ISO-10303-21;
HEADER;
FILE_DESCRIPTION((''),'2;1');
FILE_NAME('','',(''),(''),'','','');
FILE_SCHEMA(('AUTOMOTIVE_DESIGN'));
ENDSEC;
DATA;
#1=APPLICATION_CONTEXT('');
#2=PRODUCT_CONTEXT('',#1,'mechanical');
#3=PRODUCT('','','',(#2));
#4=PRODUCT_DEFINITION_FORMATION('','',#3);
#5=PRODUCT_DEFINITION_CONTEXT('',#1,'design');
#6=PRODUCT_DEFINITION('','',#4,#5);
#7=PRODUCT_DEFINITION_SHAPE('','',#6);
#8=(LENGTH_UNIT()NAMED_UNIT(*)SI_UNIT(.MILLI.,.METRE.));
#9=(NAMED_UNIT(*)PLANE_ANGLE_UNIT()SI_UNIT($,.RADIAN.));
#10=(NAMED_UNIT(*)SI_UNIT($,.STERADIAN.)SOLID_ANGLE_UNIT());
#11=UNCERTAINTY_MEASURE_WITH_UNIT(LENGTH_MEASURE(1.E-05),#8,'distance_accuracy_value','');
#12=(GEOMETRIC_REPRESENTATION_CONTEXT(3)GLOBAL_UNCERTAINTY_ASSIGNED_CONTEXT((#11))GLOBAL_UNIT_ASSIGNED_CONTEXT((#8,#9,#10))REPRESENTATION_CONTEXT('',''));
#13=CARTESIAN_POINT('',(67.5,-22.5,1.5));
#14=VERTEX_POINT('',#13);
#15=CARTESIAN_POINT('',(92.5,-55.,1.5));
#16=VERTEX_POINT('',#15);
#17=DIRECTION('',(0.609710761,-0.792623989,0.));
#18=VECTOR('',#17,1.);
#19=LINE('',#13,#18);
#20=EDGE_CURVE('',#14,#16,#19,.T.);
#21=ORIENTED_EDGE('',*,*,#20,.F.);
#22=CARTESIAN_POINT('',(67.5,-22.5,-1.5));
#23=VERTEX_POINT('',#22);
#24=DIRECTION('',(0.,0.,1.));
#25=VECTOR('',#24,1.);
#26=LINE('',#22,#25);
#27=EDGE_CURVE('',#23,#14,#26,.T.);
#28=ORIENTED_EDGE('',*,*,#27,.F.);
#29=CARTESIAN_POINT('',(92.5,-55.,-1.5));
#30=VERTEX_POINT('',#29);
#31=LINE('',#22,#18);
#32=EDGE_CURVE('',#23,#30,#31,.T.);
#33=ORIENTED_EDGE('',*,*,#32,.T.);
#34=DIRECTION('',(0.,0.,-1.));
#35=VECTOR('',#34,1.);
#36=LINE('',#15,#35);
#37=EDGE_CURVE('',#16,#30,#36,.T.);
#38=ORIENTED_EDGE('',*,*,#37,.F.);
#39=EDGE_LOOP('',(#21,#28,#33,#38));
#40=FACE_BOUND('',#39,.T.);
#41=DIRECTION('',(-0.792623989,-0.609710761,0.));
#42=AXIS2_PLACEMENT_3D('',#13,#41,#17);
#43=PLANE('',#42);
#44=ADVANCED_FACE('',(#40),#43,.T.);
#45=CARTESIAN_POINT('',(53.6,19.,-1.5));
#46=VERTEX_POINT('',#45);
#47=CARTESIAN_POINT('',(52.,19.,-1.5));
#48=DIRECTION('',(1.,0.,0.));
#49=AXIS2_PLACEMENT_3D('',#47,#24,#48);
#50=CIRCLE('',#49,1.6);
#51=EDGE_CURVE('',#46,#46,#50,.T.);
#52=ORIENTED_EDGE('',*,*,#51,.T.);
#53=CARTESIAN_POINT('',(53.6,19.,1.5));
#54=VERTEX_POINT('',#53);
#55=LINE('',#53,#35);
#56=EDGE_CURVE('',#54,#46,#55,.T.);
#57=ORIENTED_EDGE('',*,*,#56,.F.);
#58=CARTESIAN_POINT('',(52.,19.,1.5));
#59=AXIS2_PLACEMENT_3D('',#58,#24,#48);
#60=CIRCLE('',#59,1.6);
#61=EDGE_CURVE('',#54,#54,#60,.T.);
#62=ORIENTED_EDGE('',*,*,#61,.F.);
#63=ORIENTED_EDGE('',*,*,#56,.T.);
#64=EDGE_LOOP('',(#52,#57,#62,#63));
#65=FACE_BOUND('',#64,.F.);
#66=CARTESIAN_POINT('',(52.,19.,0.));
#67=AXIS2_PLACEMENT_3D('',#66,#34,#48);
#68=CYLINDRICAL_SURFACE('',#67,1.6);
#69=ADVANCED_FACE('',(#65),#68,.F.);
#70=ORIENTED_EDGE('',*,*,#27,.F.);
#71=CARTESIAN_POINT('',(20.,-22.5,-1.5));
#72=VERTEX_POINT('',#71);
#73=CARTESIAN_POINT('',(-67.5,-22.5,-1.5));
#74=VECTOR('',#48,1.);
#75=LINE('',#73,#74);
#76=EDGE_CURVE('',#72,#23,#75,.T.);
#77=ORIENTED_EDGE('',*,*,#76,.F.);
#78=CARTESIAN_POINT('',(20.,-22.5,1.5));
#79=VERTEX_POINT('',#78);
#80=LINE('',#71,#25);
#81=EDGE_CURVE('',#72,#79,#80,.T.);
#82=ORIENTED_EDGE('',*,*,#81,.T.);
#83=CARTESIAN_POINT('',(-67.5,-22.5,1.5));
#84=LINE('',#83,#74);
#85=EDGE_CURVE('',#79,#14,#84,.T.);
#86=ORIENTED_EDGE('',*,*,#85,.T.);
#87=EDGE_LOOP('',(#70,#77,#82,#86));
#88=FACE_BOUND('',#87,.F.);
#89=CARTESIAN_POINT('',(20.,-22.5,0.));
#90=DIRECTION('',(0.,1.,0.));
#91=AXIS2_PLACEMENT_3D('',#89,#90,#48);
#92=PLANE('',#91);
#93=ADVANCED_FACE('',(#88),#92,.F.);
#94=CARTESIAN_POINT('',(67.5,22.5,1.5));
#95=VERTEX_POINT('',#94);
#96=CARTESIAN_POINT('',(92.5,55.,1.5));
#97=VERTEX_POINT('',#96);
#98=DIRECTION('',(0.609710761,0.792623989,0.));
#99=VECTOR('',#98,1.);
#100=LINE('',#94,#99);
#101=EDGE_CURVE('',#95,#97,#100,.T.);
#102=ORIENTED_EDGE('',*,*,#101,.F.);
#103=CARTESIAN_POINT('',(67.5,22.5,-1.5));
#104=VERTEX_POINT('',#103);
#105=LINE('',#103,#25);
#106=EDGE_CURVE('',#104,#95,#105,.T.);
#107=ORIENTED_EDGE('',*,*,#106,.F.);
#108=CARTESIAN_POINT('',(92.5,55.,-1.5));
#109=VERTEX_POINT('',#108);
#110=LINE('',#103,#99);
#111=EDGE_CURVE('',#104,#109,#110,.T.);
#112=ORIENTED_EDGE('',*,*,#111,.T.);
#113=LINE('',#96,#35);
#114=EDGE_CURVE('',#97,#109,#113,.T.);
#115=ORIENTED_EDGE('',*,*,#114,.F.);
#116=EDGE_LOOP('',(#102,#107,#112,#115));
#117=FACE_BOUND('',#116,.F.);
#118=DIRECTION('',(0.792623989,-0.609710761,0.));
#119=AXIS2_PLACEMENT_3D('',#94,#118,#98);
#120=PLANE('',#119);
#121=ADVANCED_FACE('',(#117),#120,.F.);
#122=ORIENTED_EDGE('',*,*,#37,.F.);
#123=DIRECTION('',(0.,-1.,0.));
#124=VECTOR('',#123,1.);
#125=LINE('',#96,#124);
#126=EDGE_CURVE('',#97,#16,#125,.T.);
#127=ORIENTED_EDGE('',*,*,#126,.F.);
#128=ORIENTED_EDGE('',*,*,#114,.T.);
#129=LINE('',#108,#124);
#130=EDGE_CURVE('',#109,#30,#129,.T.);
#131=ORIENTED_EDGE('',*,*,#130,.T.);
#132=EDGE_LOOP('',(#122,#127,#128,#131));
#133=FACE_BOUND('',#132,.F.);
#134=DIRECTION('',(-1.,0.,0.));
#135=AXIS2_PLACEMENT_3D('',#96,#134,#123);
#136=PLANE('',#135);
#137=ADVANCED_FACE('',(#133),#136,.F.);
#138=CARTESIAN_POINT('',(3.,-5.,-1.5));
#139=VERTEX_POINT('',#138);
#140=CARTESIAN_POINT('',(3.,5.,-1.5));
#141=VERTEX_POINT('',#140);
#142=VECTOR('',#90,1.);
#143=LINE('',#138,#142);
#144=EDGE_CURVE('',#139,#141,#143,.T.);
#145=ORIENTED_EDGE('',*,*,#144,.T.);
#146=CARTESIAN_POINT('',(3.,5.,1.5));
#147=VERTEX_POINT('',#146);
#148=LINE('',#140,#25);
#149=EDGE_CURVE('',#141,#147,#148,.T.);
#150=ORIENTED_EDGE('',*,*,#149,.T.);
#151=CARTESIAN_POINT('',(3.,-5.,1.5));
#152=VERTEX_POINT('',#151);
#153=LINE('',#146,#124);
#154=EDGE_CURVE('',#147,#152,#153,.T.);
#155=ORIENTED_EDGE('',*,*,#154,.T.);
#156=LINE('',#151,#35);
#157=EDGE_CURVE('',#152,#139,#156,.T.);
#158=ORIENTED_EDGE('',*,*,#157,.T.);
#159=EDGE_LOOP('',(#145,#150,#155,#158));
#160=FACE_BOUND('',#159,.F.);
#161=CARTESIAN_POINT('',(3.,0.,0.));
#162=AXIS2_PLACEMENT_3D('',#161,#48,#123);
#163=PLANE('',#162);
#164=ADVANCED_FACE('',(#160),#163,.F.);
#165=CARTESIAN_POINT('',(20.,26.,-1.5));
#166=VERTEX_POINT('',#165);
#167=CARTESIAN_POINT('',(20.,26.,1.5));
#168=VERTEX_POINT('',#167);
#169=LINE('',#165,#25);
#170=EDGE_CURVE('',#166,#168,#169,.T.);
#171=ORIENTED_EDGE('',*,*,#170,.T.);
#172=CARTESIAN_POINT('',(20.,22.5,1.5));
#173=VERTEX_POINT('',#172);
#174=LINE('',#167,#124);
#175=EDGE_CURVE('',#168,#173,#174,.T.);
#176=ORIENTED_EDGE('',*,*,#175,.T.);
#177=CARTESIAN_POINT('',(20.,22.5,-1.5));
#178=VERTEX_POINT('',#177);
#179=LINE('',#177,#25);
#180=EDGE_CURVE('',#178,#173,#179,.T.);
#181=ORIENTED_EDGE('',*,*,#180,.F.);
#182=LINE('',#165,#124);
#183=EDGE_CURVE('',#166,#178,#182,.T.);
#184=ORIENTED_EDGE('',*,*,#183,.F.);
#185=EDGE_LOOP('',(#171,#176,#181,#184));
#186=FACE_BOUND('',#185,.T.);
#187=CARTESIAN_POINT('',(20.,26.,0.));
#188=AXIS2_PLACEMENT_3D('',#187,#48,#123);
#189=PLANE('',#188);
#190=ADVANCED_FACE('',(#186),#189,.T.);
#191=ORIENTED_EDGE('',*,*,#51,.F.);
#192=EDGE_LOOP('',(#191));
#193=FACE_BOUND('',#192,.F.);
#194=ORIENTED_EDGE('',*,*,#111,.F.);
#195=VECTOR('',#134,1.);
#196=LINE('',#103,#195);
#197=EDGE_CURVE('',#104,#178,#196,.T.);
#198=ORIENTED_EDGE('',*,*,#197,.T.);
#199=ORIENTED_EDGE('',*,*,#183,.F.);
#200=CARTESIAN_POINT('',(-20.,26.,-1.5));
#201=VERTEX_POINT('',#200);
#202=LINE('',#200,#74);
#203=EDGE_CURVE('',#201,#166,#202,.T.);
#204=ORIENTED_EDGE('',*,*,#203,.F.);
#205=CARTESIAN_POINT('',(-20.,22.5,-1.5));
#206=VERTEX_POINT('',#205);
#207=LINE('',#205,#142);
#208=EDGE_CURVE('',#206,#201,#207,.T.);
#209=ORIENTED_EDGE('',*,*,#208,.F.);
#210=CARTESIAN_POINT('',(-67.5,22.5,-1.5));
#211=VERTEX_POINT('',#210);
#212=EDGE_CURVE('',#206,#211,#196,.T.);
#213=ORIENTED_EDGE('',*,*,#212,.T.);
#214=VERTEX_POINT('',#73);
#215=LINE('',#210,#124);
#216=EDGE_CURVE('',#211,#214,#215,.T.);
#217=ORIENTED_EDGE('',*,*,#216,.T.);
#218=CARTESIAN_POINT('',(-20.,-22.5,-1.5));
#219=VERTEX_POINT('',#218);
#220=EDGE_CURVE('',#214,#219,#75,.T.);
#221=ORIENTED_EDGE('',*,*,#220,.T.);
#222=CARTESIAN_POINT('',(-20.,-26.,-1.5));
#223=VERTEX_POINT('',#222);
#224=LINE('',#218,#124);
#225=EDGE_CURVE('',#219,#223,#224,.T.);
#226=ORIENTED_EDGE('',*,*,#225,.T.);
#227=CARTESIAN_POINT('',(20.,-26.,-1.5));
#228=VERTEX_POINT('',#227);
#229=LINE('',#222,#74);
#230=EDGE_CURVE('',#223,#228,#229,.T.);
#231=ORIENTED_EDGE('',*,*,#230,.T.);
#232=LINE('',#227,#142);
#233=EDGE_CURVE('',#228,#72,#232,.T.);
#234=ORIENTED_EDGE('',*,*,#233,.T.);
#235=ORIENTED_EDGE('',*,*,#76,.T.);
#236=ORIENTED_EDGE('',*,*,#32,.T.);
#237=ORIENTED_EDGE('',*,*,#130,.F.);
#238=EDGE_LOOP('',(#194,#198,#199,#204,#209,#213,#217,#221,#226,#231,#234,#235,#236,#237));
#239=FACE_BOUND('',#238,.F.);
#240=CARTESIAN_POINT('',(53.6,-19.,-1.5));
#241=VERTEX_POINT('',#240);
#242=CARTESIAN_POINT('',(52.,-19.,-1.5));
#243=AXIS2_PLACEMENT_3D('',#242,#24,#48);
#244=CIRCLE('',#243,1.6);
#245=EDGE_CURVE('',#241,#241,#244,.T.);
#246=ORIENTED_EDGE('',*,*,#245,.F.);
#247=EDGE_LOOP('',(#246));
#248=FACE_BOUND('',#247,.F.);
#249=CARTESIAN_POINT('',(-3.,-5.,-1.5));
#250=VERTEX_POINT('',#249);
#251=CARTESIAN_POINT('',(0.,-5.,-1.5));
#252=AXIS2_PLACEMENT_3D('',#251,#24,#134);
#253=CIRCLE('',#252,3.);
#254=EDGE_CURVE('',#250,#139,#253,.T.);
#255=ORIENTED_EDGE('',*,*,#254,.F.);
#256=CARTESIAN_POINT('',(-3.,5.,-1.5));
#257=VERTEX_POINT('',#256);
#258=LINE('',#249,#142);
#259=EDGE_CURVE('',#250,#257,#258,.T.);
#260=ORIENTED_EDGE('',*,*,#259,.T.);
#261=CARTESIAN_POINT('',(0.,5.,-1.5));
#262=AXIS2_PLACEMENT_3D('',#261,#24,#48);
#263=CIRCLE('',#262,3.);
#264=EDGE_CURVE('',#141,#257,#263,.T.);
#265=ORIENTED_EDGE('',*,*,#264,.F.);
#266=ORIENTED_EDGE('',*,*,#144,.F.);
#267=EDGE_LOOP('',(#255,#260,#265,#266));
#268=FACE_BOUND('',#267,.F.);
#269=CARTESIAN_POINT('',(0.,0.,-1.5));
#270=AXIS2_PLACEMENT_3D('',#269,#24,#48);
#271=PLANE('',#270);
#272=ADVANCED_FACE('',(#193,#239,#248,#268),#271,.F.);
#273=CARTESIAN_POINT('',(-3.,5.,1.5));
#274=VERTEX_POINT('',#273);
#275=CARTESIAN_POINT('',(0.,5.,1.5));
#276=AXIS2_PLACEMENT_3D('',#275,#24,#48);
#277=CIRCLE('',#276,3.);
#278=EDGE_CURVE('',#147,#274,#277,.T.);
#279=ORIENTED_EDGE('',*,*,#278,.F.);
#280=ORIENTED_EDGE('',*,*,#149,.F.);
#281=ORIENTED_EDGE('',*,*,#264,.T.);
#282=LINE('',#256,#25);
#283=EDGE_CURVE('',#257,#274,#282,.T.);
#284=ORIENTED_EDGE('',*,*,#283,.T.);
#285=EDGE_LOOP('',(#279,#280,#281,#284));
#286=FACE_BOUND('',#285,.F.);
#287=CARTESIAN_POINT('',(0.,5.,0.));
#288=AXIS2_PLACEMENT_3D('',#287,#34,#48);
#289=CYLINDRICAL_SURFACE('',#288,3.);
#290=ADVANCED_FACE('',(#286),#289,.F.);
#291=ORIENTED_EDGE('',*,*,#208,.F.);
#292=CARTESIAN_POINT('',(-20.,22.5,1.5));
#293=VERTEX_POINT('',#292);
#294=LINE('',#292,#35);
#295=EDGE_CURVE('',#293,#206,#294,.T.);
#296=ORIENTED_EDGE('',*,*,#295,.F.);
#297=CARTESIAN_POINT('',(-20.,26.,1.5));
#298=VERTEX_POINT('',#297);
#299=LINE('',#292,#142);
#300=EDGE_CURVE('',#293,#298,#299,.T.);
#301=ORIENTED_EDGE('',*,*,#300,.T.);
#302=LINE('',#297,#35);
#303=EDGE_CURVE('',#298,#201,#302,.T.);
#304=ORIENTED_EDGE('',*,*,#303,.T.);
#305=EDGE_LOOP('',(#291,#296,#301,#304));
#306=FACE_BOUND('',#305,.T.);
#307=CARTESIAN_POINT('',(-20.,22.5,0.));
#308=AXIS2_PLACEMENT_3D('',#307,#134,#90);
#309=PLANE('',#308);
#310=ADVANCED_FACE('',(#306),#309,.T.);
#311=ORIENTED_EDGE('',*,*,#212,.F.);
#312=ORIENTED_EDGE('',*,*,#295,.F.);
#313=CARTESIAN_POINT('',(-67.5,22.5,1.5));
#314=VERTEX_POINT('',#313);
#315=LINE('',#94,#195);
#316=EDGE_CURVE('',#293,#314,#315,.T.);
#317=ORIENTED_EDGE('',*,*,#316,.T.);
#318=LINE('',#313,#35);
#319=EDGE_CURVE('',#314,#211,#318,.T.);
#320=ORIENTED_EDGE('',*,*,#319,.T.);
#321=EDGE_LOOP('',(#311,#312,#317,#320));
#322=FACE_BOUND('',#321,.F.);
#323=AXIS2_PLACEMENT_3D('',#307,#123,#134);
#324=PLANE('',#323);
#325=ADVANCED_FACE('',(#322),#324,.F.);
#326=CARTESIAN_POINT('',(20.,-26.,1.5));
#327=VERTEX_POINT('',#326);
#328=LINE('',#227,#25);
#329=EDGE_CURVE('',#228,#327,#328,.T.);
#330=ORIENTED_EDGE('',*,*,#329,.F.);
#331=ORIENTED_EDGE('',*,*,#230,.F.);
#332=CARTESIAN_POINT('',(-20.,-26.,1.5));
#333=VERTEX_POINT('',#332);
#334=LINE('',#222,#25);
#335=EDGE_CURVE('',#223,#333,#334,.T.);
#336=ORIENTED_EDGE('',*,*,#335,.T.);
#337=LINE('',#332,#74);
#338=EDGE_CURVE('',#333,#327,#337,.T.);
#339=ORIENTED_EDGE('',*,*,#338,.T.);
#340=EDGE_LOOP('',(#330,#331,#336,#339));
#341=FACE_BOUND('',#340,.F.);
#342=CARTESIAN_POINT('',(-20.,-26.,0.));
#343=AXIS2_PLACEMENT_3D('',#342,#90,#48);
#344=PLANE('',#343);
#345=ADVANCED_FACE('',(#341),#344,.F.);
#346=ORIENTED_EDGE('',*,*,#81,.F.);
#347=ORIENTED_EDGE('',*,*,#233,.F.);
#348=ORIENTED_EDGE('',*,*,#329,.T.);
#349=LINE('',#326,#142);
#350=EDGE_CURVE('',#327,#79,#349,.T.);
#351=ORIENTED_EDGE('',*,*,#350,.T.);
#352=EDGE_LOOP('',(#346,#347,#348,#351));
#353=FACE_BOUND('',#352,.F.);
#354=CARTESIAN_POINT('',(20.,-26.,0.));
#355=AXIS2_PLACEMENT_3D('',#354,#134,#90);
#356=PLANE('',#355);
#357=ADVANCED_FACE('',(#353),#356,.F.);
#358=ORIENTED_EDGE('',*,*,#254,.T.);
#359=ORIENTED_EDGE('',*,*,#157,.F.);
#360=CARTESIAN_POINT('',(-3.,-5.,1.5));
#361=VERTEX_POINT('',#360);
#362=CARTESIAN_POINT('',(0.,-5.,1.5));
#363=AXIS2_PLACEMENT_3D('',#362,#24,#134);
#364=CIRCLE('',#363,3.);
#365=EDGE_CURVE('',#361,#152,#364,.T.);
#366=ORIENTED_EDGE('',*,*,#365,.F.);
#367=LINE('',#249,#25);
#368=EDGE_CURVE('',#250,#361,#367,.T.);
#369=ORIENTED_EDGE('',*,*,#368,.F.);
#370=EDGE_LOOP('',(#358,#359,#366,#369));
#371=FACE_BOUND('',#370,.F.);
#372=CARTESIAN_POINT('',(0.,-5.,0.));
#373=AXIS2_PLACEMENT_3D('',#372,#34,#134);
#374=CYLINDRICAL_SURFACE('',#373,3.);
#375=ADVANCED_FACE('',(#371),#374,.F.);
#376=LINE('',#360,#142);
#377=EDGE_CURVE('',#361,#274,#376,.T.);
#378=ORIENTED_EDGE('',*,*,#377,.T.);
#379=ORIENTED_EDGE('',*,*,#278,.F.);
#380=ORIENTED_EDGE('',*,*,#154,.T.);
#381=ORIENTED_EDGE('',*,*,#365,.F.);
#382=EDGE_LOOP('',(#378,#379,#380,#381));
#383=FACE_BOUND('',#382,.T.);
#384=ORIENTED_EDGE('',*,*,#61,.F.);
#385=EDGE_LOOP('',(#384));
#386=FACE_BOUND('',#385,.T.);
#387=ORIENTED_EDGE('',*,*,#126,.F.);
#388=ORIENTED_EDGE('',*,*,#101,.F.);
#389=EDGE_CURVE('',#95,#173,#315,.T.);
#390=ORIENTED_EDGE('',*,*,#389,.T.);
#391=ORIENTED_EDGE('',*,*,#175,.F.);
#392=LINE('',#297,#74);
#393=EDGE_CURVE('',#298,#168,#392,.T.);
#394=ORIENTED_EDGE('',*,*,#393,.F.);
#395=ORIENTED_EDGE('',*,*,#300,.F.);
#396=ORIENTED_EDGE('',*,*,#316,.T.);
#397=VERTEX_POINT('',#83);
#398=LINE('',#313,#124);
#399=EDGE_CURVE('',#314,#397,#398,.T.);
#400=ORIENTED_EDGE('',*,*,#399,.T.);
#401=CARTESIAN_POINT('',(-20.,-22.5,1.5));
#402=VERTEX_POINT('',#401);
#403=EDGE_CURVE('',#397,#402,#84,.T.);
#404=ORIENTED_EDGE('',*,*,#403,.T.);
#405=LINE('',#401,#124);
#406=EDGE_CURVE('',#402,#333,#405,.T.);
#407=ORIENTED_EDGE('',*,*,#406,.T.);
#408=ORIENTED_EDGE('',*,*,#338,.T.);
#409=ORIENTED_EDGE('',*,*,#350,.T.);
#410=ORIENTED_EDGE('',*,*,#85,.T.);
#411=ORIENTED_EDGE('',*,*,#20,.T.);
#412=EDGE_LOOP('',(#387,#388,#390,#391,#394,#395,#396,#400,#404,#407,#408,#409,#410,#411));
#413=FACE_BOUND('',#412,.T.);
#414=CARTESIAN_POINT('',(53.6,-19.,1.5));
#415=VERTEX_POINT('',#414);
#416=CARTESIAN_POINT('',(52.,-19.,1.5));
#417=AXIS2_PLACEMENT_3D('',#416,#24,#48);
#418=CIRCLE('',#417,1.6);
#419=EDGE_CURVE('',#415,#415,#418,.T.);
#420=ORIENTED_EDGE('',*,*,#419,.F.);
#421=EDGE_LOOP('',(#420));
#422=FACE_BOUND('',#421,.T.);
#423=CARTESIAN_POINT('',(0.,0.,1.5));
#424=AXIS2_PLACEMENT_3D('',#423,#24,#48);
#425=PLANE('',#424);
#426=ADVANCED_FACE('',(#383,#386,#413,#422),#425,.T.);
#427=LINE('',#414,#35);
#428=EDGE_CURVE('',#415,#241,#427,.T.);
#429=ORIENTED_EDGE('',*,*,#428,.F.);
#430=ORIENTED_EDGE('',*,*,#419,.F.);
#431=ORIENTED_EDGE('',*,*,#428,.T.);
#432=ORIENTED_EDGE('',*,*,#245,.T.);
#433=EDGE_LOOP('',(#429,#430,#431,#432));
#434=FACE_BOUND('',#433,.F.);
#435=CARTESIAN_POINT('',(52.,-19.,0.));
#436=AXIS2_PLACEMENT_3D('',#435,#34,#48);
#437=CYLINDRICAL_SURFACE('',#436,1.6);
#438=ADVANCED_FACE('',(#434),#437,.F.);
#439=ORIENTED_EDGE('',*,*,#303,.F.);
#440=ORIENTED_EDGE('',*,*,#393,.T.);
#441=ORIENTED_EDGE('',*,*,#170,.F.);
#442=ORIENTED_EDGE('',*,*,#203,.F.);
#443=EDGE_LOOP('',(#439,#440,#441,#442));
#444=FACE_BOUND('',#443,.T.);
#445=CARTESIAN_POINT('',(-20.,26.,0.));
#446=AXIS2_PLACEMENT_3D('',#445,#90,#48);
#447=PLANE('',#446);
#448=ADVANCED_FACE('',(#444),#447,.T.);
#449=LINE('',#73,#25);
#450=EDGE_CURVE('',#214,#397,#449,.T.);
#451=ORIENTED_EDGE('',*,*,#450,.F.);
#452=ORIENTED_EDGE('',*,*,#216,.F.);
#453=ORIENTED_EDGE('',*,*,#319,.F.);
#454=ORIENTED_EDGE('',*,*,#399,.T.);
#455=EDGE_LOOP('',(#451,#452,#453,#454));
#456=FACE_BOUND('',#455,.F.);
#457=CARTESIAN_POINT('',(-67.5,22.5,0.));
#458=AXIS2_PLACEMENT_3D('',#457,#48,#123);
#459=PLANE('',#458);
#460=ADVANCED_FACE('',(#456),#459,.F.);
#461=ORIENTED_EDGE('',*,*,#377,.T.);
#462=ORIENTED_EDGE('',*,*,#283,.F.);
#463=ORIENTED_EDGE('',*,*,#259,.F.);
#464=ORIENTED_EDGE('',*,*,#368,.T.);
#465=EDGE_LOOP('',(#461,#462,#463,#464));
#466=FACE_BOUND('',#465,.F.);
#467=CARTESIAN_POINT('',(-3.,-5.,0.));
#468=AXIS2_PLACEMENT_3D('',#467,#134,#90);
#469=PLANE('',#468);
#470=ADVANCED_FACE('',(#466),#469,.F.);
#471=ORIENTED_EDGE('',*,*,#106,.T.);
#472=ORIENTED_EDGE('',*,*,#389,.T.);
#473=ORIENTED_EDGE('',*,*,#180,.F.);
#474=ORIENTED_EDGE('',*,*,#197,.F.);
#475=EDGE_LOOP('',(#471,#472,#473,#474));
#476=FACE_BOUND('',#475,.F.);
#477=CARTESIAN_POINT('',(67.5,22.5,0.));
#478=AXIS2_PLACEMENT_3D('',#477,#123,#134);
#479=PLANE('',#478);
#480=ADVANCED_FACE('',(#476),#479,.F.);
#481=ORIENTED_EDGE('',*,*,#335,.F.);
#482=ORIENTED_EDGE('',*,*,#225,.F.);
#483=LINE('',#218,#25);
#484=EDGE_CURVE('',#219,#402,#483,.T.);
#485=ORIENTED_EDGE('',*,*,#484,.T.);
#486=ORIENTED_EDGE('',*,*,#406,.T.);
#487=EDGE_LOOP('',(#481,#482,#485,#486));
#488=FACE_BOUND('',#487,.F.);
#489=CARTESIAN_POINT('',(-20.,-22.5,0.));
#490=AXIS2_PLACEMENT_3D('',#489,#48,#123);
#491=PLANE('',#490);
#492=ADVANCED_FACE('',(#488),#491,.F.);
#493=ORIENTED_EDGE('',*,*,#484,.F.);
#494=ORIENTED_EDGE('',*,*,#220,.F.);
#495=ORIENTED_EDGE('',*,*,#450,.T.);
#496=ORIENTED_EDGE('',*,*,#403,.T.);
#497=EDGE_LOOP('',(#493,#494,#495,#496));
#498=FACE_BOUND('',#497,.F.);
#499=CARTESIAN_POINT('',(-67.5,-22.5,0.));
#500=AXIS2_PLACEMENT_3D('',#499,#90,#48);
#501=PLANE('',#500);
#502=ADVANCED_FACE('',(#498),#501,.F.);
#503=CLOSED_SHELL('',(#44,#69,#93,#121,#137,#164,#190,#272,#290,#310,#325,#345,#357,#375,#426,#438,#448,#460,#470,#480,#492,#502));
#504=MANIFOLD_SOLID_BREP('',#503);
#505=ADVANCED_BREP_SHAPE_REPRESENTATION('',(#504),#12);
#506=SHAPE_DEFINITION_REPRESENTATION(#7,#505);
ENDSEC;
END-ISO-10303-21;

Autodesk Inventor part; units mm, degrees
ref_plane "YZ Plane" through (0, 0, 0) normal (1, 0, 0) x (0, 1, 0)
ref_plane "XZ Plane" through (0, 0, 0) normal (0, 1, 0) x (-1, 0, 0)
ref_plane "XY Plane" through (0, 0, 0) normal (0, 0, 1) x (1, 0, 0)
sketch "Sketch1" plane through (0, 0, 0) normal (0, 0, 1) x (1, 0, 0)
  line L0 (-67.5, -22.5) -> (67.5, -22.5)
  line L1 (67.5, -22.5) -> (67.5, 22.5)
  line L2 (67.5, 22.5) -> (-67.5, 22.5)
  line L3 (-67.5, 22.5) -> (-67.5, -22.5)
  line L4 (-67.5, -22.5) -> (67.5, 22.5) construction
  line L5 (67.5, -22.5) -> (-67.5, 22.5) construction
  line L6 (0, -5) -> (0, 5) construction
  line L7 (-3, -5) -> (-3, 5)
  line L8 (3, 5) -> (3, -5)
  arc A0 (-3, -5) -> (3, -5) centre (0, -5) ccw
  arc A1 (3, 5) -> (-3, 5) centre (0, 5) ccw
  line L9 (0, 0) -> (67.5, 0)
  circle A2 centre (52, 19) radius 1.6
  line L10 (-20, 26) -> (20, 26)
  line L11 (20, 26) -> (20, 22.5)
  line L12 (20, 22.5) -> (-20, 22.5)
  line L13 (-20, 22.5) -> (-20, 26)
  line L14 (-20, 26) -> (20, 22.5) construction
  line L15 (20, 26) -> (-20, 22.5) construction
  line L16 (-20, -26) -> (20, -26)
  line L17 (20, -26) -> (20, -22.5)
  line L18 (20, -22.5) -> (-20, -22.5)
  line L19 (-20, -22.5) -> (-20, -26)
  line L20 (-20, -26) -> (20, -22.5) construction
  line L21 (20, -26) -> (-20, -22.5) construction
  circle A3 centre (52, -19) radius 1.6
  point P0 (0, -8)
  point P1 (0, 8)
  point P2 (0, 24.25)
  point P3 (0, 22.5)
  point P4 (0, 22.5)
  point P5 (0, -24.25)
  point P6 (0, -22.5)
  point P7 (0, -22.5)
  dimension "d0" = 135
  dimension "d1" = 45
  dimension "d13" = 16
  dimension "d14" = 3
  dimension "d15" = 3.2
  dimension "d16" = 55
  dimension "d17" = 38
  dimension "d18" = 40
  dimension "d19" = 3.5
sketch "Sketch2" plane through (0, 0, 1.5) normal (0, 0, 1) x (1, 0, 0)
  line L0 (67.5, -22.5) -> (67.5, 22.5)
  line L1 (67.5, -22.5) -> (92.5, -55)
  line L2 (67.5, 0) -> (0, 0)
  line L3 (67.5, 22.5) -> (92.5, 55)
  line L4 (92.5, 55) -> (92.5, -55)
  dimension "d20" = 25
  dimension "d21" = 110
extrude "Plate1" add sketch "Sketch1" along normal mid plane 3
sheet face with bend "Face2" sketch "Sketch2" thickness 3 toward (0, 0, -1) bend radius 3
bend "Bend1"
equation "\"d9\" = Thickness"
equation "\"d22\" = BendRadius"
equation "\"d23\" = BendReliefWidth"
equation "\"d25\" = MinimumRemnant"
equation "\"d24\" = BendReliefDepth"
equation "\"d26\" = TransitionRadius"
equation "\"BendRadius\" = Thickness"
equation "\"BendReliefWidth\" = Thickness"
equation "\"BendReliefDepth\" = 0.5 * Thickness"
equation "\"CornerReliefSize\" = 4 * Thickness"
equation "\"MinimumRemnant\" = 2 * Thickness"
equation "\"TransitionRadius\" = BendRadius"
equation "\"JacobiRadiusSize\" = BendRadius"
equation "\"GapSize\" = Thickness"
equation "\"Thickness\" = 3"
properties part number "Path"
